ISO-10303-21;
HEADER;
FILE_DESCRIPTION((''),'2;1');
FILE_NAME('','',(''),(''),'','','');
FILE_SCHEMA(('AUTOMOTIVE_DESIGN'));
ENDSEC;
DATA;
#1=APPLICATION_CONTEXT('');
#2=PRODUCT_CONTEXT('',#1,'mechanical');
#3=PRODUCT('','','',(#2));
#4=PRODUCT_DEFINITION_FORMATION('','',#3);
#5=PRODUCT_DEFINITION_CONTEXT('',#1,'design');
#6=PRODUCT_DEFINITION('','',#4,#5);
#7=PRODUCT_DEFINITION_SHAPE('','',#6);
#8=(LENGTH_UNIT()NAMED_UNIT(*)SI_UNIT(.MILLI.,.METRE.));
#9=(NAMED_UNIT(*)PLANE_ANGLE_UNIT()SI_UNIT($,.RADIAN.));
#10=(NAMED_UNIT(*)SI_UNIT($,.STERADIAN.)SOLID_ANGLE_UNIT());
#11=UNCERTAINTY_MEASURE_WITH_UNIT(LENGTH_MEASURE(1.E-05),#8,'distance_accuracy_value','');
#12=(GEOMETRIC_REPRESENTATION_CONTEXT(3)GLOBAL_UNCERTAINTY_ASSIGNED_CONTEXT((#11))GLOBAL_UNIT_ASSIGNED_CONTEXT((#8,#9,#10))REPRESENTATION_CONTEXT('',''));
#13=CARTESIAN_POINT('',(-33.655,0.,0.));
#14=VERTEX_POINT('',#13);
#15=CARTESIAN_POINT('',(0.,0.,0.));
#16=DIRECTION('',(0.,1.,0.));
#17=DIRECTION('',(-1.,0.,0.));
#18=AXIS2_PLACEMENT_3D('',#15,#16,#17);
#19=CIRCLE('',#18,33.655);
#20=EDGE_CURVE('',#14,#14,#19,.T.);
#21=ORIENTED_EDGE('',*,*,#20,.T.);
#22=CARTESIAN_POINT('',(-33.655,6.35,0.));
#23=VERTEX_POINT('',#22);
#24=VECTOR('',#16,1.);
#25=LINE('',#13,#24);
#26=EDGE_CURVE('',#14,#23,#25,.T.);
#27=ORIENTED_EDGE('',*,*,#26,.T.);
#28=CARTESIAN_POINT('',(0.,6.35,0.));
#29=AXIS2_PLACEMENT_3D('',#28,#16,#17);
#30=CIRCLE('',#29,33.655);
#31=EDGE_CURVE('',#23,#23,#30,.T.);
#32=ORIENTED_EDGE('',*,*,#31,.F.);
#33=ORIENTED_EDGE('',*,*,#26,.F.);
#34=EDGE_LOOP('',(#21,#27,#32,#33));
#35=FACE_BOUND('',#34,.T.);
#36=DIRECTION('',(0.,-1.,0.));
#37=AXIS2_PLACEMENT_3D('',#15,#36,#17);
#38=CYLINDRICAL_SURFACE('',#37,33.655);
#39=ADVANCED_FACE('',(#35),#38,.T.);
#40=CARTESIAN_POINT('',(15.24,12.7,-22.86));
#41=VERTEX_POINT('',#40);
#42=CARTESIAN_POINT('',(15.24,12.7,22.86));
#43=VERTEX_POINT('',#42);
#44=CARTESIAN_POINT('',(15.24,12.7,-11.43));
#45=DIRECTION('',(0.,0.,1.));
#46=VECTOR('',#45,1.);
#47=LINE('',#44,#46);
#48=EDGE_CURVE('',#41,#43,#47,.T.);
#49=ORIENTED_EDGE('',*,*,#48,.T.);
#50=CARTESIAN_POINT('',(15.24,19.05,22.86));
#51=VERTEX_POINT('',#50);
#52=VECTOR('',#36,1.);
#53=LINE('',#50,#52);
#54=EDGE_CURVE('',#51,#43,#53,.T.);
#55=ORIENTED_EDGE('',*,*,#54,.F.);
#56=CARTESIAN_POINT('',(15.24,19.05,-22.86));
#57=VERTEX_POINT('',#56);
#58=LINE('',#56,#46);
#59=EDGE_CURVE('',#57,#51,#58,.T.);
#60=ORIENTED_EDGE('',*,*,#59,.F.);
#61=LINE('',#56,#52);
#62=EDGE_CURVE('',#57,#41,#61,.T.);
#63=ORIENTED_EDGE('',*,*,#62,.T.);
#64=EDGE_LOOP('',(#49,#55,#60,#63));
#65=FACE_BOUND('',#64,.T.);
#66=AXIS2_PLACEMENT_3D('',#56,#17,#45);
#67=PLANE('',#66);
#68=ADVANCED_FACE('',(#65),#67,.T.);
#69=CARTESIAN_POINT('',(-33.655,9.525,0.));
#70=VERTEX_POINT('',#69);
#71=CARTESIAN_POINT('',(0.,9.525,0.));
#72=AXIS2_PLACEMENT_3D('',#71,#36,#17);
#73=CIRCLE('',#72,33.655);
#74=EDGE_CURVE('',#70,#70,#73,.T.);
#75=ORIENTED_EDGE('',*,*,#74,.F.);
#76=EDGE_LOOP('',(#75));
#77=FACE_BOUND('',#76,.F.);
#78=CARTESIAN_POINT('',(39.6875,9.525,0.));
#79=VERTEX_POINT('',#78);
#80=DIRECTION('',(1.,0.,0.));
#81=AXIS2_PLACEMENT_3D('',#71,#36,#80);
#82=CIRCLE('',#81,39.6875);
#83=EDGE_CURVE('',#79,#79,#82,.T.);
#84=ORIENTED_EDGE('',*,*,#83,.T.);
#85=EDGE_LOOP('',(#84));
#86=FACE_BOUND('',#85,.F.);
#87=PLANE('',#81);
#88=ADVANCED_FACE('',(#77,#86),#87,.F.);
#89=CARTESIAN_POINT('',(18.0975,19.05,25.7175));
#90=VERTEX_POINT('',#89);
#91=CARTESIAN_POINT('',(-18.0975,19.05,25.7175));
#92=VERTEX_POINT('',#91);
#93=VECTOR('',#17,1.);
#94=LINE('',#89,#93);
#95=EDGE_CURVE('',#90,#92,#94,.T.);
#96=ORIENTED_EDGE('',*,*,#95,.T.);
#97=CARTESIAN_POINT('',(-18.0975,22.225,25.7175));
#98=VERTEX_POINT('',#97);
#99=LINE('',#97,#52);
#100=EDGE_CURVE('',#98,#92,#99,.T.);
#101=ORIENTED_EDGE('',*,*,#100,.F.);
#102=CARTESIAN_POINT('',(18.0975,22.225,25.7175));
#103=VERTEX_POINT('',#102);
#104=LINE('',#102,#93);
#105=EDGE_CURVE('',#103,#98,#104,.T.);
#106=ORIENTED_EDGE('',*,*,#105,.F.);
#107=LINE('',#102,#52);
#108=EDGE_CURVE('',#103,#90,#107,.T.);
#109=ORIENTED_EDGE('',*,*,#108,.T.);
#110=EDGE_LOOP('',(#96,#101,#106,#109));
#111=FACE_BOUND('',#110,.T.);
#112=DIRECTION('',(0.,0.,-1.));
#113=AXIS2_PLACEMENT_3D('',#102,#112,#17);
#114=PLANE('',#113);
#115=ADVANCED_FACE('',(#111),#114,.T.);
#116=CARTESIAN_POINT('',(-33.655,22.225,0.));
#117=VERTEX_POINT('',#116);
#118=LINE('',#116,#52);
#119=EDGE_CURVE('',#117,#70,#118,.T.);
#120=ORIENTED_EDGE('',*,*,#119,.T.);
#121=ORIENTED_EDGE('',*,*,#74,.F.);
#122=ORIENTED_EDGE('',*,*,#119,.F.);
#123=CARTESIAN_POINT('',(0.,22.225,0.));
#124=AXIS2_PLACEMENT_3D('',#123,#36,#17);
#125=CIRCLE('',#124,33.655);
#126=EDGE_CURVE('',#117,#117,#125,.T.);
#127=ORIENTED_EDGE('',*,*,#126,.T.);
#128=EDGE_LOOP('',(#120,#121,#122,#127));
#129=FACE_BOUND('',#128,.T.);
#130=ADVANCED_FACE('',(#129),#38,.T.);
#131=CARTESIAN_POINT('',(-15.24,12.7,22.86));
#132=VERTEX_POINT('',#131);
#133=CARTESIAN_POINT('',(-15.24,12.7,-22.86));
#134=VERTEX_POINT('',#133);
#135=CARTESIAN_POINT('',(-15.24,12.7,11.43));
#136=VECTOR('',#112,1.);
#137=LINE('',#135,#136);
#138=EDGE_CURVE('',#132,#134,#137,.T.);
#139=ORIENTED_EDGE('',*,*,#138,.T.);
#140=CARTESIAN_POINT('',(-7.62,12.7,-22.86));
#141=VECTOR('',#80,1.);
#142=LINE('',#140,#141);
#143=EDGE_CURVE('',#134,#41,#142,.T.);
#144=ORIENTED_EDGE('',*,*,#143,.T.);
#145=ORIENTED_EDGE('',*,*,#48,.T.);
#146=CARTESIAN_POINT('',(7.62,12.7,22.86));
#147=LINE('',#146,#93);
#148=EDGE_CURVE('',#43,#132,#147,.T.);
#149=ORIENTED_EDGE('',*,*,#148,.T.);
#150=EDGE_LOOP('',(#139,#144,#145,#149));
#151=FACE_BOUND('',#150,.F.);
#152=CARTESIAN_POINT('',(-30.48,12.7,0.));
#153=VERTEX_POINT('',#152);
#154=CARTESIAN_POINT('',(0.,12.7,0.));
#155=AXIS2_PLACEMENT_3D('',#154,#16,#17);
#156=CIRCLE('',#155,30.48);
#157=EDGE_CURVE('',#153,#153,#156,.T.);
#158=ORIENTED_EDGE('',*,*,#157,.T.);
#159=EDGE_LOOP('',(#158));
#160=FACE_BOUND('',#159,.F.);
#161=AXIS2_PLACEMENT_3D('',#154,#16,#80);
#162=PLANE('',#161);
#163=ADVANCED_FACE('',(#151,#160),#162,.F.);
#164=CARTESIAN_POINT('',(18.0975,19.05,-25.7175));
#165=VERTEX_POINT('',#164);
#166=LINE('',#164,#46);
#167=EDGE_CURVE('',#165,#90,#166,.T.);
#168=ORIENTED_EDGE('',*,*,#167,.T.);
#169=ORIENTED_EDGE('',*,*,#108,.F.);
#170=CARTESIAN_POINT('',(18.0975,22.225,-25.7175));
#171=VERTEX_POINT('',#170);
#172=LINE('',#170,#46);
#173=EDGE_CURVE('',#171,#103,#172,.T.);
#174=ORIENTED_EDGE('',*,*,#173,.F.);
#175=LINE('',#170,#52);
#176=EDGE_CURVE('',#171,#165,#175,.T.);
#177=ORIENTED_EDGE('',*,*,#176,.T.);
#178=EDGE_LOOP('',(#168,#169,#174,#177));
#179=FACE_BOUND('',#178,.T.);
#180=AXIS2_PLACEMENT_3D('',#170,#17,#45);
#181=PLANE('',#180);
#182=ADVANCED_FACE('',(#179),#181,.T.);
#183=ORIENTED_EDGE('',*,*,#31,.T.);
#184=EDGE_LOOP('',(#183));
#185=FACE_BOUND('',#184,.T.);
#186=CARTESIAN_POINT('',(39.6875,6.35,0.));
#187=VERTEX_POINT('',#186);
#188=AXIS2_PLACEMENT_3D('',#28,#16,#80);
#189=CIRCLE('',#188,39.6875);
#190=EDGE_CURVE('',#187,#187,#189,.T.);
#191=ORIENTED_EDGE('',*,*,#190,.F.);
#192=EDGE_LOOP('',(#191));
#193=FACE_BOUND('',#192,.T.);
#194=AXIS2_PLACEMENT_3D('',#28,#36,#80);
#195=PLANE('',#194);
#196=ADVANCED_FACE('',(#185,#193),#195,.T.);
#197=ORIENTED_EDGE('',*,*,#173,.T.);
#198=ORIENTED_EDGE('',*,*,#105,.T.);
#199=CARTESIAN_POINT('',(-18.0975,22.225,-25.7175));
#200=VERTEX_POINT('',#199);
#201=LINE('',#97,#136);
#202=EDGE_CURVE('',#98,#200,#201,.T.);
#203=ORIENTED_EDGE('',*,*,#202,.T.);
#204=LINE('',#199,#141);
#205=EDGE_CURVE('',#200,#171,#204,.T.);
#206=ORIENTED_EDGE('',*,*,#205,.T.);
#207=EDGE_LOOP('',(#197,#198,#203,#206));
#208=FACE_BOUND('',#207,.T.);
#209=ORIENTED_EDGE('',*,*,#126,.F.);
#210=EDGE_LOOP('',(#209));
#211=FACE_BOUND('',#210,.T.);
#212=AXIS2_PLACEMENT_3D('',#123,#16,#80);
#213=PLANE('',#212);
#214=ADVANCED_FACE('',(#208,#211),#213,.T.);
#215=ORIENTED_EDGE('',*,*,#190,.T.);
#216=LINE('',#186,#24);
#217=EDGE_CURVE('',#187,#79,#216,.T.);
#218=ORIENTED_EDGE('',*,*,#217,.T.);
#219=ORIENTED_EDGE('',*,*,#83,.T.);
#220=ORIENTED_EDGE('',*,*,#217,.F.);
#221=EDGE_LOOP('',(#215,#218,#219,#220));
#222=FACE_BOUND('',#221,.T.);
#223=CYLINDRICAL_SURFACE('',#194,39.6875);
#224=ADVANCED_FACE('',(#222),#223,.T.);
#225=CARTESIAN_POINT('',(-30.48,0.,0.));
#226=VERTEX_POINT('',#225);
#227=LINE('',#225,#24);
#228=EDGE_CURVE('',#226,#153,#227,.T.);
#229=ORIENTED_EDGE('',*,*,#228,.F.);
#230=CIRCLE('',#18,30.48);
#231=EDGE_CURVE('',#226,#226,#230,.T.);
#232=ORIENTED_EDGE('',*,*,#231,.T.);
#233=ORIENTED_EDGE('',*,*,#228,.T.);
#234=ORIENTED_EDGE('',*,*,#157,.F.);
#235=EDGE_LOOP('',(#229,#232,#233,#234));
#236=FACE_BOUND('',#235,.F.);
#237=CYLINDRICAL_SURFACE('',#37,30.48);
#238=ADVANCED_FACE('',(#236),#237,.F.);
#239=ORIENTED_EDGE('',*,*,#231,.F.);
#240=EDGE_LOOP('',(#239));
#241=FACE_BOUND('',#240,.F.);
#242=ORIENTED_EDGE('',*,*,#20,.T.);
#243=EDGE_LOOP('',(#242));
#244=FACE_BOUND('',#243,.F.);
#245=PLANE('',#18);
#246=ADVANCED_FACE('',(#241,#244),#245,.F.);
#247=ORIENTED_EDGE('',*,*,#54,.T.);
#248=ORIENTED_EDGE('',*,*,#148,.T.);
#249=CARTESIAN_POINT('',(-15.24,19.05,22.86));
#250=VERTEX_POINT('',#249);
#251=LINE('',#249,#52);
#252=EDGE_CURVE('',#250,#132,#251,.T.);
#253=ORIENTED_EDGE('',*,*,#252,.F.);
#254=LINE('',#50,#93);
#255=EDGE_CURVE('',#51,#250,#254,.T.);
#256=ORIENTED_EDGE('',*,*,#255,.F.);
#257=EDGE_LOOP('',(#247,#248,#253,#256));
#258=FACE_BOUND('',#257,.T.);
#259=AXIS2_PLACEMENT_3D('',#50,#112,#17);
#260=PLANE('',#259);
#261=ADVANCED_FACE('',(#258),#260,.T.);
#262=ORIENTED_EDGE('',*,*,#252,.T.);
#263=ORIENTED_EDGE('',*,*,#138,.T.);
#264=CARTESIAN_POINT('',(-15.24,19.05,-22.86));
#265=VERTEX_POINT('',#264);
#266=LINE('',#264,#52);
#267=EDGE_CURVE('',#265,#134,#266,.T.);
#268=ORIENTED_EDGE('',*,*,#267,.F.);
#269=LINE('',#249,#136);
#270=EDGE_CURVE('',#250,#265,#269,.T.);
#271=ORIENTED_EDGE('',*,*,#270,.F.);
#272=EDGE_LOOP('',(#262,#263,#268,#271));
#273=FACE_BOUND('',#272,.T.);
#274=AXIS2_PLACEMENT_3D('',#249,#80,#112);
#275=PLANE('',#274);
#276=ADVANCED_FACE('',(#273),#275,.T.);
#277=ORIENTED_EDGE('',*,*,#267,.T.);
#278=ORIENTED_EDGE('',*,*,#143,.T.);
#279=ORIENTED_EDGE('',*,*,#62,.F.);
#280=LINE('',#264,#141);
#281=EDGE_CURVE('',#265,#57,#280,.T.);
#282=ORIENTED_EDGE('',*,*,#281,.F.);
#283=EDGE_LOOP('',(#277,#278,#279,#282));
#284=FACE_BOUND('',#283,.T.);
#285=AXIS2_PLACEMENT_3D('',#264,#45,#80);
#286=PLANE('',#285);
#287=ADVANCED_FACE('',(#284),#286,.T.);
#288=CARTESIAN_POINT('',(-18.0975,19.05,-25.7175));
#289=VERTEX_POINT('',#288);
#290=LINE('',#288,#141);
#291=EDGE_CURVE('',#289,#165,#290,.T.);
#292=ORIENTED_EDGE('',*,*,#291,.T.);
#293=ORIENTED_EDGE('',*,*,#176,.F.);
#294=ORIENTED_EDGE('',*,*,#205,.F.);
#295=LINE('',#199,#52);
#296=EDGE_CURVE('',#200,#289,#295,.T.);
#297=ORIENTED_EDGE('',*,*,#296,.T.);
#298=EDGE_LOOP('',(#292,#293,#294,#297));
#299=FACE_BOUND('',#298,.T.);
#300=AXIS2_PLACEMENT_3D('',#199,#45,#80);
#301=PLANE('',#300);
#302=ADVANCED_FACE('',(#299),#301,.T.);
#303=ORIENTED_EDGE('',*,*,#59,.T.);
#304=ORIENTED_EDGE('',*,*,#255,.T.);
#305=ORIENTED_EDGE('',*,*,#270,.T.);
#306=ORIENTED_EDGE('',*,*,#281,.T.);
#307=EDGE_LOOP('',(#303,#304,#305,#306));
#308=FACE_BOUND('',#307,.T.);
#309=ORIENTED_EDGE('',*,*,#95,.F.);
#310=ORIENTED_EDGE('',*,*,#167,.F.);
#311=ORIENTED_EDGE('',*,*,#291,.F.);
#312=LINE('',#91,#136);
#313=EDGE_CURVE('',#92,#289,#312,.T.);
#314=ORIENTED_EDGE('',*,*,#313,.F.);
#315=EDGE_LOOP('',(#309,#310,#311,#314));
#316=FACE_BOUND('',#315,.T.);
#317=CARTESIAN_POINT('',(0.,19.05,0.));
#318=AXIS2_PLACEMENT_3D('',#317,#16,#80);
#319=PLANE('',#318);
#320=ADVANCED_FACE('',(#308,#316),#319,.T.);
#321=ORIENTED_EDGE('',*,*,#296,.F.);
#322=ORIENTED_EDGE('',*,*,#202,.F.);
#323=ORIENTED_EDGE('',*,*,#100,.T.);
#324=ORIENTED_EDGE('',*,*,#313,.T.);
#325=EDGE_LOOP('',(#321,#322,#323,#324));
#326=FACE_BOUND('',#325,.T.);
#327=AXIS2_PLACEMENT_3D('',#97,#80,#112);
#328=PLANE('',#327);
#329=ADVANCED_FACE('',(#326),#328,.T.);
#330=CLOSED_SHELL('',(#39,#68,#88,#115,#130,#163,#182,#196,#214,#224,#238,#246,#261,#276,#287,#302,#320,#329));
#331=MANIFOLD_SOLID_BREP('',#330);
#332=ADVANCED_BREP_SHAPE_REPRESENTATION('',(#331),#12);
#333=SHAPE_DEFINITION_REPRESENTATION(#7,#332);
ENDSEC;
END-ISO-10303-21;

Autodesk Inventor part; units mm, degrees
ref_plane "YZ Plane" through (0, 0, 0) normal (1, 0, 0) x (0, 1, 0)
ref_plane "XZ Plane" through (0, 0, 0) normal (0, 1, 0) x (-1, 0, 0)
ref_plane "XY Plane" through (0, 0, 0) normal (0, 0, 1) x (1, 0, 0)
sketch "Sketch1" plane through (0, 0, 0) normal (0, 1, 0) x (-1, 0, 0)
  circle A0 centre (0, 0) radius 33.655
  circle A1 centre (0, 0) radius 30.48
  dimension "d0" = 67.31
  dimension "d1" = 60.96
extrude "Extrusion1" add sketch "Sketch1" along normal blind 12.7
sketch "Sketch2" plane through (0, 12.7, 0) normal (0, 1, 0) x (1, 0, 0)
  circle A0 centre (0, 0) radius 33.655
extrude "Extrusion2" add sketch "Sketch2" along normal blind 9.525
sketch "Sketch3" plane through (0, 22.225, 0) normal (0, 1, 0) x (1, 0, 0)
  line L0 (18.0975, -25.7175) -> (-18.0975, -25.7175)
  line L1 (-18.0975, -25.7175) -> (-18.0975, 25.7175)
  line L2 (-18.0975, 25.7175) -> (18.0975, 25.7175)
  line L3 (18.0975, 25.7175) -> (18.0975, -25.7175)
  line L4 (18.0975, -25.7175) -> (-18.0975, 25.7175) construction
  line L5 (-18.0975, -25.7175) -> (18.0975, 25.7175) construction
  point P0 (0, 0)
  dimension "d6" = 36.195
  dimension "d7" = 51.435
extrude "Extrusion3" cut sketch "Sketch3" against normal blind 3.175
sketch "Sketch4" plane through (0, 19.05, 0) normal (0, 1, 0) x (1, 0, 0)
  line L0 (15.24, -22.86) -> (-15.24, -22.86)
  line L1 (-15.24, -22.86) -> (-15.24, 22.86)
  line L2 (-15.24, 22.86) -> (15.24, 22.86)
  line L3 (15.24, 22.86) -> (15.24, -22.86)
  line L4 (15.24, -22.86) -> (-15.24, 22.86) construction
  line L5 (-15.24, -22.86) -> (15.24, 22.86) construction
  point P0 (0, 0)
  dimension "d10" = 30.48
  dimension "d11" = 45.72
extrude "Extrusion4" cut sketch "Sketch4" against normal through all
ref_plane "Work Plane1" through (0, 6.35, 0) normal (0, -1, 0) x (1, 0, 0)
sketch "Sketch5" plane through (0, 6.35, 0) normal (0, -1, 0) x (1, 0, 0)
  circle A0 centre (0, 0) radius 33.655
  circle A1 centre (0, 0) radius 29.8345
  circle A2 centre (0, 0) radius 39.6875
  dimension "d15" = 79.375
extrude "Extrusion5" add sketch "Sketch5" against normal blind 3.175 contours A2
properties part number "Upper Coll r2ar"
